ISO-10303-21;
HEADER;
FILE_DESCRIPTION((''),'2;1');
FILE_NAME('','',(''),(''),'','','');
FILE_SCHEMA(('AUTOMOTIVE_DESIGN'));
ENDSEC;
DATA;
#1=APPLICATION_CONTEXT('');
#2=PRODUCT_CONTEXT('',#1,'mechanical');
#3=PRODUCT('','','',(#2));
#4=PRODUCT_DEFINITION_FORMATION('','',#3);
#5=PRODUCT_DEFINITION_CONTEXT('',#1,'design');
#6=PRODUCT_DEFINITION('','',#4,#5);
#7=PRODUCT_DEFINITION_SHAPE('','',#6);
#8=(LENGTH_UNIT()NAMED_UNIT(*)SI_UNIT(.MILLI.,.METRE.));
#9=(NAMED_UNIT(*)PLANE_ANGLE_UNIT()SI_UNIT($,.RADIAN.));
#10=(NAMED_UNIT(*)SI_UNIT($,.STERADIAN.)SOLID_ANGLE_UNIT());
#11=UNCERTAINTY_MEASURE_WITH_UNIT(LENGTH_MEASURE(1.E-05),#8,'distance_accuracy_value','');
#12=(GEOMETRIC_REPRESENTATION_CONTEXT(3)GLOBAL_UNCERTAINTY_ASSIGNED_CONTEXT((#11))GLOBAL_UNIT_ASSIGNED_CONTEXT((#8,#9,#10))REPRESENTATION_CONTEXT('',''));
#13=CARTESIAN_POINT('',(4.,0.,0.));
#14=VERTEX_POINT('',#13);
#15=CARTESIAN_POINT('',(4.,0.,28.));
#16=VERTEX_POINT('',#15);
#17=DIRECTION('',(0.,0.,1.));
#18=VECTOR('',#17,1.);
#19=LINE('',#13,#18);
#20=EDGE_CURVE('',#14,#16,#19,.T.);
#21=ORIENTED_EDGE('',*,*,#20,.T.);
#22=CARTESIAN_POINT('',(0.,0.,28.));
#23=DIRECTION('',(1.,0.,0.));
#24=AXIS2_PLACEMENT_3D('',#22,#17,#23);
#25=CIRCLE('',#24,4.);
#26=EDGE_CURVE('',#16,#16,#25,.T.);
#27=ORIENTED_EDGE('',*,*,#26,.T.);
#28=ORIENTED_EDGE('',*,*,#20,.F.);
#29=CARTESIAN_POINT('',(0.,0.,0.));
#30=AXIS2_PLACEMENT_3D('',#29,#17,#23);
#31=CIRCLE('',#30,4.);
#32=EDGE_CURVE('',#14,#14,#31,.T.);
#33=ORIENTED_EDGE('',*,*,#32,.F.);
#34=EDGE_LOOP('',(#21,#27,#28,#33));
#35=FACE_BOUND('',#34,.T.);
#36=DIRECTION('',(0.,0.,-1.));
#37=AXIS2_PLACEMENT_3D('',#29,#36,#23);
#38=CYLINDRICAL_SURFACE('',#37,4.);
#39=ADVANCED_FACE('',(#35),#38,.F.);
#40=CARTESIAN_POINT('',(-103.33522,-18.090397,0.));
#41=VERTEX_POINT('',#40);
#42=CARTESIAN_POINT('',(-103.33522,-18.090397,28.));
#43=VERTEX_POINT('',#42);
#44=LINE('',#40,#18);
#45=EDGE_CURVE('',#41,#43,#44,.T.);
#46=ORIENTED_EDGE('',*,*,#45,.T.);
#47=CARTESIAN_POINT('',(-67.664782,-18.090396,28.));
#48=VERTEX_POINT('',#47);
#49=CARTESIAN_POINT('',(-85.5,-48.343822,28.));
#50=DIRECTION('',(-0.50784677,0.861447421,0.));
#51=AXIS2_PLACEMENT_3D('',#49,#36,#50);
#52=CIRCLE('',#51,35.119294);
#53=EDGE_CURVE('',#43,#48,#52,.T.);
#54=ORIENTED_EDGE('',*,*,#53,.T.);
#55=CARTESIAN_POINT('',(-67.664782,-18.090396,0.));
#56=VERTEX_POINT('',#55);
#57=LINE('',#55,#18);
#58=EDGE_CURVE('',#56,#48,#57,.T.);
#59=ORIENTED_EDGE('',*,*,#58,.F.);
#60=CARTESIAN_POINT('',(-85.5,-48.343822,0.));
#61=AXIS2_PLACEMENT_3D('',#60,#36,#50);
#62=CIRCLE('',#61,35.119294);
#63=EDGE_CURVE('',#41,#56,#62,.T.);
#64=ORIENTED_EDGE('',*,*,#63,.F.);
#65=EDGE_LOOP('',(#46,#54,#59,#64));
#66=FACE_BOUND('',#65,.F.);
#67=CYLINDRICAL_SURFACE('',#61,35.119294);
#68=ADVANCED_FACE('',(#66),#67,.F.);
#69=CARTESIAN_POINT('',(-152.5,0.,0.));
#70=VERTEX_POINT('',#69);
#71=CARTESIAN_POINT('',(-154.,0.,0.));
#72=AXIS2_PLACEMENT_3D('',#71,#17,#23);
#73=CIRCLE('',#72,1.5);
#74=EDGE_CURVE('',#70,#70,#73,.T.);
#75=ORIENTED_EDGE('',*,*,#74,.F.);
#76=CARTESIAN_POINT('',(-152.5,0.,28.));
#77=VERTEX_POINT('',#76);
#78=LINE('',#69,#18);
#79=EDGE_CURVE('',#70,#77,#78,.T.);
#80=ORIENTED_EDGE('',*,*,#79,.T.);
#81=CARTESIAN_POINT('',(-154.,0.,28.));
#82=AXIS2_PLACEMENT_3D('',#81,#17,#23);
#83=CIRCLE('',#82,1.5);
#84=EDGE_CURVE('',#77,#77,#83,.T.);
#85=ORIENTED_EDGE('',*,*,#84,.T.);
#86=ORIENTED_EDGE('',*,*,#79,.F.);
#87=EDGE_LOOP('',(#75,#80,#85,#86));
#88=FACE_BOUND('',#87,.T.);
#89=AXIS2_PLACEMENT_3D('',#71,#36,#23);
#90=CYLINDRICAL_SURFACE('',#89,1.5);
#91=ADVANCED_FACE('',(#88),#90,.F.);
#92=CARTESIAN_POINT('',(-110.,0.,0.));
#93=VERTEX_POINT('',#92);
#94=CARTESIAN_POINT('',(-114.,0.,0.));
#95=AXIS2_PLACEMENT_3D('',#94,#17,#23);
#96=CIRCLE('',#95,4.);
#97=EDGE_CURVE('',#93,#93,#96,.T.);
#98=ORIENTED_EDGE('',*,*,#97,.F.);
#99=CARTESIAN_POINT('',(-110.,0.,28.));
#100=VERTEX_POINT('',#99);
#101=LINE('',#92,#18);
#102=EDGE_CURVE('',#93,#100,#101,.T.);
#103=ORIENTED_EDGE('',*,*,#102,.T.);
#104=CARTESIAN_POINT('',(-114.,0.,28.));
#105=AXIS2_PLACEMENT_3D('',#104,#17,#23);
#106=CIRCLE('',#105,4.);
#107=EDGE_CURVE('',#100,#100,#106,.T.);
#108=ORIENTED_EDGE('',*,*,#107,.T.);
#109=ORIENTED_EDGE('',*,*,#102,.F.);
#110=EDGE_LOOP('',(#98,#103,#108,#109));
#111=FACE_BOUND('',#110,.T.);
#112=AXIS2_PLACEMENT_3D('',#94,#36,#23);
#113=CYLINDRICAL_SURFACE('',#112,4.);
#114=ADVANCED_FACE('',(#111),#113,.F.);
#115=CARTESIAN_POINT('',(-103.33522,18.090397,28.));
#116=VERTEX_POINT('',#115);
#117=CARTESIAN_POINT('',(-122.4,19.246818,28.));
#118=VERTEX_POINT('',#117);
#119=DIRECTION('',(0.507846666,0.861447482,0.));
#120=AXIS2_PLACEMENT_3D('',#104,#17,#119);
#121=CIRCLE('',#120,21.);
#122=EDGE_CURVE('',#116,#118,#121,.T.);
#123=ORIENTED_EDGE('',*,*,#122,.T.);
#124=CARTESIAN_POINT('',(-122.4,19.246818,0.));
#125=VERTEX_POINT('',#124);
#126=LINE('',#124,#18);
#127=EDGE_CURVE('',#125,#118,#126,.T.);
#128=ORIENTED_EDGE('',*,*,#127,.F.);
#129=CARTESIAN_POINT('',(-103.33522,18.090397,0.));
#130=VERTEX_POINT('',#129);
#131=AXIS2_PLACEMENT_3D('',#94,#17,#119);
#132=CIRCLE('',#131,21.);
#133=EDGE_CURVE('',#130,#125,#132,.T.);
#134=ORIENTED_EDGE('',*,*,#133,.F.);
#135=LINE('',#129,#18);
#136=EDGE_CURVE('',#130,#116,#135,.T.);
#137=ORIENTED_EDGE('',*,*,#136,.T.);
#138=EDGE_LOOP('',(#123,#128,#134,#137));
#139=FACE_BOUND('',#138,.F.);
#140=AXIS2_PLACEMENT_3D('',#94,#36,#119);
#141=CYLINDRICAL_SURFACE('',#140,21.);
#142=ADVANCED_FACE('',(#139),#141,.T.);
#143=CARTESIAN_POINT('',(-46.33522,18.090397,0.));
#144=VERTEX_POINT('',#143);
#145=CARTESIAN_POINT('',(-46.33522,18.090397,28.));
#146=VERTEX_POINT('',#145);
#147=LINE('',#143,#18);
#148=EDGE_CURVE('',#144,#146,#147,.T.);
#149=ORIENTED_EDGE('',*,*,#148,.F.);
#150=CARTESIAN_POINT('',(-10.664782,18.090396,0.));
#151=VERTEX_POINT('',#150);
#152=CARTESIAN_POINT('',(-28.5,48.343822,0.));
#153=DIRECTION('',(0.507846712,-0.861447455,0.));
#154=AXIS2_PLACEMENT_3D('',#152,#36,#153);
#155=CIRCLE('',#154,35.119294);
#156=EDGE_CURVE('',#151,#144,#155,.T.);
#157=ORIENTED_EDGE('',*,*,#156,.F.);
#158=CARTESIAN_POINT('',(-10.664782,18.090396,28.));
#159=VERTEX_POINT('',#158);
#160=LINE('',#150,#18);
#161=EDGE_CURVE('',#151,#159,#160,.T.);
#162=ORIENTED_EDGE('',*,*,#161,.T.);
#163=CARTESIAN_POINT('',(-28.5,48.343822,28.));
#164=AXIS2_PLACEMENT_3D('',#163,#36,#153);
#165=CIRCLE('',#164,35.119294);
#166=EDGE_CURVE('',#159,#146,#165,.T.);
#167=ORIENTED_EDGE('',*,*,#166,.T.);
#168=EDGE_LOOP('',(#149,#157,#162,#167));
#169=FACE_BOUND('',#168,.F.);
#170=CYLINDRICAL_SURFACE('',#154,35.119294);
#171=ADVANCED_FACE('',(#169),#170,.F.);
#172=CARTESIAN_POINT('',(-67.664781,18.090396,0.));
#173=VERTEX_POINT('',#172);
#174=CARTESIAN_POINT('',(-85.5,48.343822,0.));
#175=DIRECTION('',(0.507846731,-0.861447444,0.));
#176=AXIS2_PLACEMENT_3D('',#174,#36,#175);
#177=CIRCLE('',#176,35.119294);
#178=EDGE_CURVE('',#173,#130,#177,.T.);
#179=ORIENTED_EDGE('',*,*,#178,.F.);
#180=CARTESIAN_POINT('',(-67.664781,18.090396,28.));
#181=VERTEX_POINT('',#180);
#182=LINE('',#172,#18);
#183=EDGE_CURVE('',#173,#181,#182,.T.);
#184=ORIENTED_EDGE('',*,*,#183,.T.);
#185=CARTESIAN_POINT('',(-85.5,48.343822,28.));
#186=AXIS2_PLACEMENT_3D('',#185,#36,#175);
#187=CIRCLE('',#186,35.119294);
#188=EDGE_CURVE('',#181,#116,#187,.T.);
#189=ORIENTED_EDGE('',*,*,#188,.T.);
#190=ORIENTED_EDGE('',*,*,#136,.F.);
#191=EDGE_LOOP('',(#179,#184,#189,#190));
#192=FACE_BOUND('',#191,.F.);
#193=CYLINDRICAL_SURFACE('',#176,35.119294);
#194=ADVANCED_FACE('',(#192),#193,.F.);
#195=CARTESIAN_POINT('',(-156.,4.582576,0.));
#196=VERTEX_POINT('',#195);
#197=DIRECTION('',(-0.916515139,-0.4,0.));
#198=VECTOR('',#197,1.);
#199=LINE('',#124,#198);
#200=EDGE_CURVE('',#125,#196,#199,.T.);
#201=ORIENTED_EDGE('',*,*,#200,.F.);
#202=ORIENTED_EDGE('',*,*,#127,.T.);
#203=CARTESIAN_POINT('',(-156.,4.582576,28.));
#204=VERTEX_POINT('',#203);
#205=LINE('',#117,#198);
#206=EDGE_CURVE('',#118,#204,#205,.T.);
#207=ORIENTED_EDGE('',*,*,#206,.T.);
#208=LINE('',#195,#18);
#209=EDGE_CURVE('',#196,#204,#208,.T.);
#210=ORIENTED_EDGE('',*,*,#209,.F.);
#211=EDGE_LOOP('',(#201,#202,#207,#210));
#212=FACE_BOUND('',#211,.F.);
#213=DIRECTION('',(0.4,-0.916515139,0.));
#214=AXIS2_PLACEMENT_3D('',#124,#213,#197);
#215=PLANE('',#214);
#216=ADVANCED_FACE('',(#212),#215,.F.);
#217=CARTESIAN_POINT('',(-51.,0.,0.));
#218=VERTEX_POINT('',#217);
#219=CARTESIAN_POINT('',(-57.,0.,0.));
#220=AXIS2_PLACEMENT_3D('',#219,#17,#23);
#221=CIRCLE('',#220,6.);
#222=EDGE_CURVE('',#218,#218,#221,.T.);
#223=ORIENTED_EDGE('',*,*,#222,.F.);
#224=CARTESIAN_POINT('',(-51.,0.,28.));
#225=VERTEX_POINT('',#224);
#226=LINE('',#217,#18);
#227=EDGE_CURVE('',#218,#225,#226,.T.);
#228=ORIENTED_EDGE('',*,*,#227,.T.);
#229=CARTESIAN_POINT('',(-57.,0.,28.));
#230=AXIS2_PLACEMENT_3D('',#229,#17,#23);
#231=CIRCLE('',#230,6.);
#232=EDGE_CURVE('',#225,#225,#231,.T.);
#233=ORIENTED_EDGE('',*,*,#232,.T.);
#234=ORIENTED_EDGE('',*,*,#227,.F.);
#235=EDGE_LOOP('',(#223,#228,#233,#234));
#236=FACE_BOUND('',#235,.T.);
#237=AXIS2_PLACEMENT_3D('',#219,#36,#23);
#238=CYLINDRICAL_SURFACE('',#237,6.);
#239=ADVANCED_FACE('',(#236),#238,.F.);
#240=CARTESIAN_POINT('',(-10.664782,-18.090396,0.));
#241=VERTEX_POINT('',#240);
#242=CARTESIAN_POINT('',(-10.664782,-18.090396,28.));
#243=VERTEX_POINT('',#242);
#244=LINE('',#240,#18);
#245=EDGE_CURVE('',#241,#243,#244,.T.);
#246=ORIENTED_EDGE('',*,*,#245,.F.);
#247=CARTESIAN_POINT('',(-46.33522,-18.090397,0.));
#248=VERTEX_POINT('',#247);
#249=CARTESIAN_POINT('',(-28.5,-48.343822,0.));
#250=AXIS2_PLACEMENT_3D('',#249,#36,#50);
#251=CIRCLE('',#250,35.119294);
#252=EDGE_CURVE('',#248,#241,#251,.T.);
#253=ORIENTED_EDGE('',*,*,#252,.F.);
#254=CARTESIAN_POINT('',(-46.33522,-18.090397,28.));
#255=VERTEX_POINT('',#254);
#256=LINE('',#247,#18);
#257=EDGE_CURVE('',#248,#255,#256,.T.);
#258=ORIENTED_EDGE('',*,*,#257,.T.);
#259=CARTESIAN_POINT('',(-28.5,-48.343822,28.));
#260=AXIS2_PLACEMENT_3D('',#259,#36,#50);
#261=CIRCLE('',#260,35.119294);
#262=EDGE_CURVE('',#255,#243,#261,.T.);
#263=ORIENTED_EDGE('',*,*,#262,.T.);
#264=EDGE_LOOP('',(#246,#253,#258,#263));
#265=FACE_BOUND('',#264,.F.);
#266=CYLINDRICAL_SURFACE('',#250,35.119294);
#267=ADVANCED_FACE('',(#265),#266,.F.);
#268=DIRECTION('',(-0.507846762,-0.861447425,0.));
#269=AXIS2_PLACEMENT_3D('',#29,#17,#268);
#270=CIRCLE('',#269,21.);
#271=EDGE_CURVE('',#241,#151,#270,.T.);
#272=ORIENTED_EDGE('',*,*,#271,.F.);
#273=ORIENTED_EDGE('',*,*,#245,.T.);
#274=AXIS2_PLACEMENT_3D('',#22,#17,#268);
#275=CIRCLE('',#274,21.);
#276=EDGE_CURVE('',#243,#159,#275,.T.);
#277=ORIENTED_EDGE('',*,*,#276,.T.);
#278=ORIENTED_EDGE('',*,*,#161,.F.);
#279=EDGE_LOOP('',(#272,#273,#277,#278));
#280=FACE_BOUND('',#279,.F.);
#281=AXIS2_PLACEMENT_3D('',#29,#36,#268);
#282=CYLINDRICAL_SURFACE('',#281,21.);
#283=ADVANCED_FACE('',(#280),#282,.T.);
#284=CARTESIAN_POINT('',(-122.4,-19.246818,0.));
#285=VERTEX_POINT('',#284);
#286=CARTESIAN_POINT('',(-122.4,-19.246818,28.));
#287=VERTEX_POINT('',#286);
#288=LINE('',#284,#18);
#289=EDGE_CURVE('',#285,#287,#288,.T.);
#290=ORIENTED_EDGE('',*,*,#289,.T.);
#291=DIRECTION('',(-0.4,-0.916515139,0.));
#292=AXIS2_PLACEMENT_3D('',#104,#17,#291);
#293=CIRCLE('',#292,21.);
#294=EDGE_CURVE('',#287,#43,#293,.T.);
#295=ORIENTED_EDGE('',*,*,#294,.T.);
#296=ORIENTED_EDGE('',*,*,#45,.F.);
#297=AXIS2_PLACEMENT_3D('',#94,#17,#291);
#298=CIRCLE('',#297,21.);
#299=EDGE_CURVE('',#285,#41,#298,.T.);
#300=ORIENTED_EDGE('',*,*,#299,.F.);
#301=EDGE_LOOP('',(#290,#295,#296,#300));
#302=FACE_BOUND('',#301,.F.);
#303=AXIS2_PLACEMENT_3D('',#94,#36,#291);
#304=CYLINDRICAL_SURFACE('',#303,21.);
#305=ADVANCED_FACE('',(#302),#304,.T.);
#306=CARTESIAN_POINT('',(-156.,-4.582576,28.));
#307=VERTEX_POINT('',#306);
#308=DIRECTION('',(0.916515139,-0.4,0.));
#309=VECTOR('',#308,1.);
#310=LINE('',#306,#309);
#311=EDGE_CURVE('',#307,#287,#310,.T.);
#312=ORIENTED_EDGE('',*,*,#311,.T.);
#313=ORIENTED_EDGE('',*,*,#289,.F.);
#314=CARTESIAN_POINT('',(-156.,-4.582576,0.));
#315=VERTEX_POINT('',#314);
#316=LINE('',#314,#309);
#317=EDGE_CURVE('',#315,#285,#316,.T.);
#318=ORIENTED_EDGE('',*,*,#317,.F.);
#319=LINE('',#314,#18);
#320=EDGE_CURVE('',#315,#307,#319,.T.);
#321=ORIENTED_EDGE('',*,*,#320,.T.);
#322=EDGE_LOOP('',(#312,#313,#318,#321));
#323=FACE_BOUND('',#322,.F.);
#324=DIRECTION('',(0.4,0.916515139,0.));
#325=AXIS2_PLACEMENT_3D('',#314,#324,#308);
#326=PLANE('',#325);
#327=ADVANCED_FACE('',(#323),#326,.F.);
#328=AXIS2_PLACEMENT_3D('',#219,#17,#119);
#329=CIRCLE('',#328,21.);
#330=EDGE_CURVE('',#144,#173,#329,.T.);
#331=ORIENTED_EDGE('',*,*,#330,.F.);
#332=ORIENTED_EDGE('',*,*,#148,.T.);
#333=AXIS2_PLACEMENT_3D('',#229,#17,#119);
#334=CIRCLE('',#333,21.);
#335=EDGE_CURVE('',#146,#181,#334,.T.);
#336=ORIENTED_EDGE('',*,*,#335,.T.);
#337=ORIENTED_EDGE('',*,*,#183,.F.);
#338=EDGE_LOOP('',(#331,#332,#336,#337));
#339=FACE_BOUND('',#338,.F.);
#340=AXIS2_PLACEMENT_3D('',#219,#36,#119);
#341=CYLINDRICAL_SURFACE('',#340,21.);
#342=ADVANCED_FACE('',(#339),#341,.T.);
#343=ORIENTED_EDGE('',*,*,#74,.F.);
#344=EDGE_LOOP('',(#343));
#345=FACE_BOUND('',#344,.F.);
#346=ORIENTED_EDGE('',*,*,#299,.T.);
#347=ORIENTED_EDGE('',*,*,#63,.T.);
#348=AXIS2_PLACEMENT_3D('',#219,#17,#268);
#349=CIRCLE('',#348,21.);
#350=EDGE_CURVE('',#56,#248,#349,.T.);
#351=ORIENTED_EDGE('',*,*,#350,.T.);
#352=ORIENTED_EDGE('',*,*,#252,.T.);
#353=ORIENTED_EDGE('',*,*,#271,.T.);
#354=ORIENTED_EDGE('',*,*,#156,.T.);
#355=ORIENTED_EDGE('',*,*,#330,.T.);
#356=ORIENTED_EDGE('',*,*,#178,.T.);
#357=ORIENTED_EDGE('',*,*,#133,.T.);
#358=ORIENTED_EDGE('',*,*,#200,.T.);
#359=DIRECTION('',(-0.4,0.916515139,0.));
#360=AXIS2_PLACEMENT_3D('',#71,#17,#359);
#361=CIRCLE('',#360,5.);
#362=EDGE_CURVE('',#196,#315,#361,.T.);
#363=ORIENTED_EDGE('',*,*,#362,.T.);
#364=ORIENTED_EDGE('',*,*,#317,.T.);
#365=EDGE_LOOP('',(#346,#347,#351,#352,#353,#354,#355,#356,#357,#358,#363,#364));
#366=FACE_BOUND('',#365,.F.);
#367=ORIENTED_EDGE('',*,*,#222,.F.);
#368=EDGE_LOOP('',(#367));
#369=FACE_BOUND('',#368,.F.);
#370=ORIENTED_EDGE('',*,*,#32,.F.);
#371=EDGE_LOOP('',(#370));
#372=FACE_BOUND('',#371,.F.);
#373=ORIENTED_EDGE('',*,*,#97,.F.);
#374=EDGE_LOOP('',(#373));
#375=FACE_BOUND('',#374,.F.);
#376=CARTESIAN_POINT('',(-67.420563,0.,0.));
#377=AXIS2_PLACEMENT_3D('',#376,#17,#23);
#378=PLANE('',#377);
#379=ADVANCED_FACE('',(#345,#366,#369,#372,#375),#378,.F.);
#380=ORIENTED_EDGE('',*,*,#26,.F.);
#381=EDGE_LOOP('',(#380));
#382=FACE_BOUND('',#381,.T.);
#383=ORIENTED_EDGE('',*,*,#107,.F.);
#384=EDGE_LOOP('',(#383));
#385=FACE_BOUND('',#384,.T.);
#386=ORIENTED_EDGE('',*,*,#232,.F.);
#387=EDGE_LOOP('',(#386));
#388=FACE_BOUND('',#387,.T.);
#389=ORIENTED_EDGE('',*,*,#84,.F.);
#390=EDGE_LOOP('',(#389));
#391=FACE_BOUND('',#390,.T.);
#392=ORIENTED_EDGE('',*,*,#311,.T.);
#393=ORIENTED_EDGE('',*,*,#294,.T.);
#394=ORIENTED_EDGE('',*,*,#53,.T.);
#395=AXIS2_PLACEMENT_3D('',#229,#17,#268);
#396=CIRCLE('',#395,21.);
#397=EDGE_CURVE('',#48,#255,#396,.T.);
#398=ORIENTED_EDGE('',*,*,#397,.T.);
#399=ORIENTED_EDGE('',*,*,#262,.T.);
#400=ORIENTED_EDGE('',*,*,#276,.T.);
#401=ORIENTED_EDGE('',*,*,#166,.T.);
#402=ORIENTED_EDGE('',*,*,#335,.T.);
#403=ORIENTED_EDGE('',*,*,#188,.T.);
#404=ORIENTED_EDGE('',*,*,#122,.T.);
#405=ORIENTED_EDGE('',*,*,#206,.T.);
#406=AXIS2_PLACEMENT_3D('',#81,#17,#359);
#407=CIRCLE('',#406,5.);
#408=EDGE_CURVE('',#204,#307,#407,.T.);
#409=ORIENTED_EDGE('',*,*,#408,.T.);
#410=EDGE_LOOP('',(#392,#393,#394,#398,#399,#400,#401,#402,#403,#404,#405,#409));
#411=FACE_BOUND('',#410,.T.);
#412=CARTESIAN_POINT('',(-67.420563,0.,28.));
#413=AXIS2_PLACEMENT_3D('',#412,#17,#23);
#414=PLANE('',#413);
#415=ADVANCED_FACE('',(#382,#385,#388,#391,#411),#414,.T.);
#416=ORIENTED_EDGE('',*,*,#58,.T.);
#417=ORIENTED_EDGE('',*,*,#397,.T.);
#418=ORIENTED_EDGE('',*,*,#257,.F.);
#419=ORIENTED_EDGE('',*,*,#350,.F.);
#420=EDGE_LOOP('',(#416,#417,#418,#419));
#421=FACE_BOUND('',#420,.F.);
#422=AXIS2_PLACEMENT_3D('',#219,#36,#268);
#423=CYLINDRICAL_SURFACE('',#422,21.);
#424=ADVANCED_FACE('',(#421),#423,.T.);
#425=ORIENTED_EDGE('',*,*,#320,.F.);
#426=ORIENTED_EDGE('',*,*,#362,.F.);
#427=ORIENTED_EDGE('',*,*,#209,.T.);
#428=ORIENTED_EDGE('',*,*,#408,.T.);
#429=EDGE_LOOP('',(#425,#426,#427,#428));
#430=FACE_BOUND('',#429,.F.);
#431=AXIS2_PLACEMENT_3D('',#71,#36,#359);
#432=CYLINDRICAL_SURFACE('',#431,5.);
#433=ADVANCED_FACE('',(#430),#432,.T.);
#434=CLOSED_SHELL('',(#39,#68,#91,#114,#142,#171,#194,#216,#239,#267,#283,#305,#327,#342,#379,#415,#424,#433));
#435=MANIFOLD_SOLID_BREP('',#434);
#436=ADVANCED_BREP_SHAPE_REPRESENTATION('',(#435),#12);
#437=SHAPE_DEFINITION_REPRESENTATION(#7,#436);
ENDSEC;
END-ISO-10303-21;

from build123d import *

# Parameters (mm, degrees)
F0_R     = 1.5
F0_R_2   = 4
F0_R_3   = 6
F1_DEPTH = 28


# Not quite as in the source:
# - ends of sketch curves that miss each other by under 0.0002 mm in the source are joined


with BuildPart() as f1:
    # F0 (on Top) → F1 (new body)
    with BuildSketch(Plane.XY):
        with BuildLine():
            ThreePointArc((-46.3352200183, -18.0903971195), (-28.5000011764, -13.2245283483), (-10.6647820085, -18.0903959247))
            ThreePointArc((-10.6647820085, -18.0903959247), (21, 0), (-10.6647820085, 18.0903959247))
            ThreePointArc((-10.6647820085, 18.0903959247), (-28.5000011764, 13.2245283483), (-46.3352200183, 18.0903971195))
            ThreePointArc((-46.3352200183, 18.0903971195), (-57.0000007926, 21), (-67.6647813473, 18.0903963145))
            ThreePointArc((-67.6647813473, 18.0903963145), (-85.5000011764, 13.2245283483), (-103.3352200183, 18.0903971195))
            ThreePointArc((-103.3352200183, 18.0903971195), (-112.7285298393, 20.9614733173), (-122.4, 19.2468179188))
            Line((-122.4, 19.2468179188), (-156, 4.582575695))
            ThreePointArc((-156, 4.582575695), (-159, 0), (-156, -4.582575695))
            Line((-156, -4.582575695), (-122.4, -19.2468179188))
            ThreePointArc((-122.4, -19.2468179188), (-112.7285306305, -20.9614733653), (-103.3352200183, -18.0903971195))
            ThreePointArc((-103.3352200183, -18.0903971195), (-85.5000011764, -13.2245283483), (-67.6647820085, -18.0903959247))
            ThreePointArc((-67.6647820085, -18.0903959247), (-57.0000011764, -21), (-46.3352200183, -18.0903971195))
        make_face()
        with Locations((-154, 0)):
            Circle(F0_R, mode=Mode.SUBTRACT)
        with Locations((-114, 0)):
            Circle(F0_R_2, mode=Mode.SUBTRACT)
        with Locations((-57, 0)):
            Circle(F0_R_3, mode=Mode.SUBTRACT)
        Circle(F0_R_2, mode=Mode.SUBTRACT)
    extrude(amount=F1_DEPTH)


solid = f1.part
